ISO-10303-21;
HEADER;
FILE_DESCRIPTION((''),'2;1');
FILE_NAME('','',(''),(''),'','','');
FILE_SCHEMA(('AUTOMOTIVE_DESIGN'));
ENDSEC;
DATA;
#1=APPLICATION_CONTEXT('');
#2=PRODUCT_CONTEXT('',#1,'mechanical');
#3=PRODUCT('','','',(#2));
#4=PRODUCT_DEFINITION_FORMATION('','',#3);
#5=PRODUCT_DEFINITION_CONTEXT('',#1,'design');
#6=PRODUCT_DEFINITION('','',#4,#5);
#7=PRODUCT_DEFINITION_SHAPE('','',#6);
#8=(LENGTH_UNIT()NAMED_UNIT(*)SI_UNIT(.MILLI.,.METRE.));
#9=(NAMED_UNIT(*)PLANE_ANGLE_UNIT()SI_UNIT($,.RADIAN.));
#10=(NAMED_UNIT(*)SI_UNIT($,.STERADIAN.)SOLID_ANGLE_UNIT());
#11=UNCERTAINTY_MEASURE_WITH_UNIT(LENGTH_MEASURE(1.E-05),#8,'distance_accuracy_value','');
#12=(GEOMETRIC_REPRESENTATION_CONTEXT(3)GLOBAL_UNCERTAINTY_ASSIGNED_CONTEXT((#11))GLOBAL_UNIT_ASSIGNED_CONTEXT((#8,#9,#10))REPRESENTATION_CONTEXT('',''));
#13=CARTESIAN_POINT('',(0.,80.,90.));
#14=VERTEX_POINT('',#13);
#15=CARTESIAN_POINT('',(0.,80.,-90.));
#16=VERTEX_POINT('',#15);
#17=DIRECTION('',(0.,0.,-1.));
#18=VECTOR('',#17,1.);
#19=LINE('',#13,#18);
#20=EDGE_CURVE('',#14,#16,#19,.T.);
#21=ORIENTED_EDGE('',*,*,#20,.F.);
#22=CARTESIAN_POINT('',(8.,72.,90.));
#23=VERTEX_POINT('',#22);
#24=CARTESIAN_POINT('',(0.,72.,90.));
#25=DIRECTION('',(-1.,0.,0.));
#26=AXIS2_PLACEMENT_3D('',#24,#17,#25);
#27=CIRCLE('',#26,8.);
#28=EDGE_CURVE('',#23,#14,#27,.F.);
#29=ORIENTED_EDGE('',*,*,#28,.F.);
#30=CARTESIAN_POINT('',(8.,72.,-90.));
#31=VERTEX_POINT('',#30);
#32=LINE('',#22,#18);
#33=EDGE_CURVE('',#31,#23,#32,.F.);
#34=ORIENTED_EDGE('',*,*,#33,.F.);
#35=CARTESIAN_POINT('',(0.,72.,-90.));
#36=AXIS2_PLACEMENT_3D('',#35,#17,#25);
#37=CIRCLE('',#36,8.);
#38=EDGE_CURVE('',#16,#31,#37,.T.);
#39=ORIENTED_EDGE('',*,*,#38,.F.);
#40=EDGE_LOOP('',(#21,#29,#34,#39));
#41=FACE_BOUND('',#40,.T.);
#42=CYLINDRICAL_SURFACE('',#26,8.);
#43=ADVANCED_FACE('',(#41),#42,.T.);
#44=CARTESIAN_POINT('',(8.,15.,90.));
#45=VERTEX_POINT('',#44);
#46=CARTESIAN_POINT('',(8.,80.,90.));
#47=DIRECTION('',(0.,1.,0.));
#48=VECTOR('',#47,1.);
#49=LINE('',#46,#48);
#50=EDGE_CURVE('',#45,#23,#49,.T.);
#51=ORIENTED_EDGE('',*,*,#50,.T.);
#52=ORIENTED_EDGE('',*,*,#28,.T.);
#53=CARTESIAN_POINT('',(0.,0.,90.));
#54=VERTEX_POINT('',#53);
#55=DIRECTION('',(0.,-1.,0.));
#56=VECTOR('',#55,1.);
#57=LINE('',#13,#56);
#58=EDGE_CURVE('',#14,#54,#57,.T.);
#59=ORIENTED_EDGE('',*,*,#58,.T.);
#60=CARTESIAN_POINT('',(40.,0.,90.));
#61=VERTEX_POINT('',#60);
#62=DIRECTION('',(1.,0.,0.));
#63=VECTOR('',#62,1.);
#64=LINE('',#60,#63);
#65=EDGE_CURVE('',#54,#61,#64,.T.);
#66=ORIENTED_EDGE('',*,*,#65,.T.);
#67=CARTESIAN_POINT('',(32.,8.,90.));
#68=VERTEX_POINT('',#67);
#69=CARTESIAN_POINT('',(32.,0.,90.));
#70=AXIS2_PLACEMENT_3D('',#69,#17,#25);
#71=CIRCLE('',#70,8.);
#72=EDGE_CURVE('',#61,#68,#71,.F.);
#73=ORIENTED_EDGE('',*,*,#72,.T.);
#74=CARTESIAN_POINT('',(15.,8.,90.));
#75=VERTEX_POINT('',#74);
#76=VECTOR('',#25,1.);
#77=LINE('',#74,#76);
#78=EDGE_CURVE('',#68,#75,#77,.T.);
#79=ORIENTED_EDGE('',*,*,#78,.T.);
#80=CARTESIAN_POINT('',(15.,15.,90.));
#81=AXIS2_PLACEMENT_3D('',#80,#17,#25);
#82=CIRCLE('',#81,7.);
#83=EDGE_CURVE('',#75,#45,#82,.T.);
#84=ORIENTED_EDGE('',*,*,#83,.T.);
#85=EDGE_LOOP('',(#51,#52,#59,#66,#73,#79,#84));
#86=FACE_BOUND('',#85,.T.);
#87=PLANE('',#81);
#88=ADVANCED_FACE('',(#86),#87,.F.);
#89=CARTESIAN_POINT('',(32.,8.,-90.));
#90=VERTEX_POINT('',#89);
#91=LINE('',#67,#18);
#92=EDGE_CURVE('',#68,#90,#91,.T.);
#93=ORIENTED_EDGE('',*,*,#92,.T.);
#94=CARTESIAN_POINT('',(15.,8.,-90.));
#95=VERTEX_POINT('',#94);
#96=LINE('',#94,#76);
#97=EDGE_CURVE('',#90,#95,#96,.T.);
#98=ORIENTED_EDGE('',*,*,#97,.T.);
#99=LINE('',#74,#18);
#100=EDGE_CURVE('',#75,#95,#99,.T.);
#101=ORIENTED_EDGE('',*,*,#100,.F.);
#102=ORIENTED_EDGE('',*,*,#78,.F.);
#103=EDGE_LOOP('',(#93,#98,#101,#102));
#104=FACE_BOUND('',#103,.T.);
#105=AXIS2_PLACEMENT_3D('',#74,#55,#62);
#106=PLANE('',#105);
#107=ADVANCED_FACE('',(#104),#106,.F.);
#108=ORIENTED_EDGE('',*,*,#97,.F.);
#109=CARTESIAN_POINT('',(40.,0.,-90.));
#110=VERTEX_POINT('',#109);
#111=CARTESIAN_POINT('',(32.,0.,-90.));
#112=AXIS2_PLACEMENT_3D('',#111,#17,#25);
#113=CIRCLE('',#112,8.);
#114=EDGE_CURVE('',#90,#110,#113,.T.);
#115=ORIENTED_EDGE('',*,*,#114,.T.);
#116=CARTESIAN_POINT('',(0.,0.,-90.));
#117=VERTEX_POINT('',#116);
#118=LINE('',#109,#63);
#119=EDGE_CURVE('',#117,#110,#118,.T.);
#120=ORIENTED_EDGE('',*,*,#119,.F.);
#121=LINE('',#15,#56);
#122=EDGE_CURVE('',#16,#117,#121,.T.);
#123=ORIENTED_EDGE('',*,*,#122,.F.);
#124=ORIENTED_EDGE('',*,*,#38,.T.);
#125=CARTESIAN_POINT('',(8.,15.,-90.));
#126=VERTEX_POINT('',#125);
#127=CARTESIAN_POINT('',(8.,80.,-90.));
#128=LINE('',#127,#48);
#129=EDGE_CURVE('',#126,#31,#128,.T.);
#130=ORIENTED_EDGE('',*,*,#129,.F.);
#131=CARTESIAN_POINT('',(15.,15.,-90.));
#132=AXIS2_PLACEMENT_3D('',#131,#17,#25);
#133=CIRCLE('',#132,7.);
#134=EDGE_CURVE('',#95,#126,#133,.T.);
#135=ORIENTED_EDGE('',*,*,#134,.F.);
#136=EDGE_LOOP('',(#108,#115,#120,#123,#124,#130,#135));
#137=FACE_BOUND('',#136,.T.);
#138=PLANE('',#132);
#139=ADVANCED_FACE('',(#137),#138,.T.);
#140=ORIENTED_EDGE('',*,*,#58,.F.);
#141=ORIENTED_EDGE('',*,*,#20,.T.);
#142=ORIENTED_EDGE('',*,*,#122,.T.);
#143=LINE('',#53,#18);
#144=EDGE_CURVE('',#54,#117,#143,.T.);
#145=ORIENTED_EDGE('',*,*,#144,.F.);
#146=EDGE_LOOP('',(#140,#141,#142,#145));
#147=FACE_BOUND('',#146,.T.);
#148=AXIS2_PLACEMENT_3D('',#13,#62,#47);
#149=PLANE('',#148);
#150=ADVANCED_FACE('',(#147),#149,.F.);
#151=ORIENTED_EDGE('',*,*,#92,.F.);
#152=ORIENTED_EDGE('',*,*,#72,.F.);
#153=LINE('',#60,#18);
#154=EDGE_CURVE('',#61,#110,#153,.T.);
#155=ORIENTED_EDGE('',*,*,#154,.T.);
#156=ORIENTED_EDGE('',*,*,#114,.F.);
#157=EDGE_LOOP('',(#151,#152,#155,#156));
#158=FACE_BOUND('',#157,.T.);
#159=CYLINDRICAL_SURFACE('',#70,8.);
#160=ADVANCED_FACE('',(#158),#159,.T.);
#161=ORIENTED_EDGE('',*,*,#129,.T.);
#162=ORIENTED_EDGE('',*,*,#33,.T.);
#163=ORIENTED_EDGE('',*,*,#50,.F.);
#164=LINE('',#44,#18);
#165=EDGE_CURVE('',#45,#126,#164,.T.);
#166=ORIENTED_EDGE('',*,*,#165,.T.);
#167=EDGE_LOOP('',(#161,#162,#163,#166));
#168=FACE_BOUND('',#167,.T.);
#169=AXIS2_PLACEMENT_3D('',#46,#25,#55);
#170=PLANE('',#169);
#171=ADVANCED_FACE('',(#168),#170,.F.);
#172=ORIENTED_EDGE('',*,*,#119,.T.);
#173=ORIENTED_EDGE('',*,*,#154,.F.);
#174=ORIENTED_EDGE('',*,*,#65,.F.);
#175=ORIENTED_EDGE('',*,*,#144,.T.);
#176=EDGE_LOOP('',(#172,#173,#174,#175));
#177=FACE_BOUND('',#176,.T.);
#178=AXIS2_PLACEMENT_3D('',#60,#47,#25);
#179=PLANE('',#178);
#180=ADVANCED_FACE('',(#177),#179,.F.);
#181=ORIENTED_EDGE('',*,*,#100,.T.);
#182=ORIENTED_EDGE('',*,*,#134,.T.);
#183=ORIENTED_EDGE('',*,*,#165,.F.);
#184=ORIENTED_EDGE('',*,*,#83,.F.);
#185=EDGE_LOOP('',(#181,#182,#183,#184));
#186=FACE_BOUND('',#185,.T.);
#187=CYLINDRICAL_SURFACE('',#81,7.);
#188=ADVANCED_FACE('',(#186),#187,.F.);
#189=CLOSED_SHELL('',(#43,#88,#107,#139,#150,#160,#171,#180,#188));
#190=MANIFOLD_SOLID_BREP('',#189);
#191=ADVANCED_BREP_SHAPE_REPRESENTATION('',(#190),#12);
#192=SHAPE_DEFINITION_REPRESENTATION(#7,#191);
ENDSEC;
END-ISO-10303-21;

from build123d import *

# Parameters (mm, degrees)
BASESTEELANGLE_DEPTH = 90
TOEFILLET_R          = 8


with BuildPart() as part:
    # Sketch1 → BaseSteelAngle (new, symmetric)
    with BuildSketch(Plane.XY):
        with BuildLine():
            Line((0, 80), (0, 0))
            Line((0, 0), (40, 0))
            Line((40, 0), (40, 8))
            Line((40, 8), (15, 8))
            ThreePointArc((15, 8), (10.050252532, 10.050252532), (8, 15))
            Line((8, 15), (8, 80))
            Line((8, 80), (0, 80))
        make_face()
    extrude(amount=BASESTEELANGLE_DEPTH, both=True)

    # ToeFillet
    toefillet_edges = [part.edges().sort_by_distance(p)[0] for p in [
        (8, 80, 0),
        (40, 8, 0),
    ]]
    fillet(toefillet_edges, radius=TOEFILLET_R - 0.0001)  # a hair under: the kernel refuses the full size


solid = part.part
